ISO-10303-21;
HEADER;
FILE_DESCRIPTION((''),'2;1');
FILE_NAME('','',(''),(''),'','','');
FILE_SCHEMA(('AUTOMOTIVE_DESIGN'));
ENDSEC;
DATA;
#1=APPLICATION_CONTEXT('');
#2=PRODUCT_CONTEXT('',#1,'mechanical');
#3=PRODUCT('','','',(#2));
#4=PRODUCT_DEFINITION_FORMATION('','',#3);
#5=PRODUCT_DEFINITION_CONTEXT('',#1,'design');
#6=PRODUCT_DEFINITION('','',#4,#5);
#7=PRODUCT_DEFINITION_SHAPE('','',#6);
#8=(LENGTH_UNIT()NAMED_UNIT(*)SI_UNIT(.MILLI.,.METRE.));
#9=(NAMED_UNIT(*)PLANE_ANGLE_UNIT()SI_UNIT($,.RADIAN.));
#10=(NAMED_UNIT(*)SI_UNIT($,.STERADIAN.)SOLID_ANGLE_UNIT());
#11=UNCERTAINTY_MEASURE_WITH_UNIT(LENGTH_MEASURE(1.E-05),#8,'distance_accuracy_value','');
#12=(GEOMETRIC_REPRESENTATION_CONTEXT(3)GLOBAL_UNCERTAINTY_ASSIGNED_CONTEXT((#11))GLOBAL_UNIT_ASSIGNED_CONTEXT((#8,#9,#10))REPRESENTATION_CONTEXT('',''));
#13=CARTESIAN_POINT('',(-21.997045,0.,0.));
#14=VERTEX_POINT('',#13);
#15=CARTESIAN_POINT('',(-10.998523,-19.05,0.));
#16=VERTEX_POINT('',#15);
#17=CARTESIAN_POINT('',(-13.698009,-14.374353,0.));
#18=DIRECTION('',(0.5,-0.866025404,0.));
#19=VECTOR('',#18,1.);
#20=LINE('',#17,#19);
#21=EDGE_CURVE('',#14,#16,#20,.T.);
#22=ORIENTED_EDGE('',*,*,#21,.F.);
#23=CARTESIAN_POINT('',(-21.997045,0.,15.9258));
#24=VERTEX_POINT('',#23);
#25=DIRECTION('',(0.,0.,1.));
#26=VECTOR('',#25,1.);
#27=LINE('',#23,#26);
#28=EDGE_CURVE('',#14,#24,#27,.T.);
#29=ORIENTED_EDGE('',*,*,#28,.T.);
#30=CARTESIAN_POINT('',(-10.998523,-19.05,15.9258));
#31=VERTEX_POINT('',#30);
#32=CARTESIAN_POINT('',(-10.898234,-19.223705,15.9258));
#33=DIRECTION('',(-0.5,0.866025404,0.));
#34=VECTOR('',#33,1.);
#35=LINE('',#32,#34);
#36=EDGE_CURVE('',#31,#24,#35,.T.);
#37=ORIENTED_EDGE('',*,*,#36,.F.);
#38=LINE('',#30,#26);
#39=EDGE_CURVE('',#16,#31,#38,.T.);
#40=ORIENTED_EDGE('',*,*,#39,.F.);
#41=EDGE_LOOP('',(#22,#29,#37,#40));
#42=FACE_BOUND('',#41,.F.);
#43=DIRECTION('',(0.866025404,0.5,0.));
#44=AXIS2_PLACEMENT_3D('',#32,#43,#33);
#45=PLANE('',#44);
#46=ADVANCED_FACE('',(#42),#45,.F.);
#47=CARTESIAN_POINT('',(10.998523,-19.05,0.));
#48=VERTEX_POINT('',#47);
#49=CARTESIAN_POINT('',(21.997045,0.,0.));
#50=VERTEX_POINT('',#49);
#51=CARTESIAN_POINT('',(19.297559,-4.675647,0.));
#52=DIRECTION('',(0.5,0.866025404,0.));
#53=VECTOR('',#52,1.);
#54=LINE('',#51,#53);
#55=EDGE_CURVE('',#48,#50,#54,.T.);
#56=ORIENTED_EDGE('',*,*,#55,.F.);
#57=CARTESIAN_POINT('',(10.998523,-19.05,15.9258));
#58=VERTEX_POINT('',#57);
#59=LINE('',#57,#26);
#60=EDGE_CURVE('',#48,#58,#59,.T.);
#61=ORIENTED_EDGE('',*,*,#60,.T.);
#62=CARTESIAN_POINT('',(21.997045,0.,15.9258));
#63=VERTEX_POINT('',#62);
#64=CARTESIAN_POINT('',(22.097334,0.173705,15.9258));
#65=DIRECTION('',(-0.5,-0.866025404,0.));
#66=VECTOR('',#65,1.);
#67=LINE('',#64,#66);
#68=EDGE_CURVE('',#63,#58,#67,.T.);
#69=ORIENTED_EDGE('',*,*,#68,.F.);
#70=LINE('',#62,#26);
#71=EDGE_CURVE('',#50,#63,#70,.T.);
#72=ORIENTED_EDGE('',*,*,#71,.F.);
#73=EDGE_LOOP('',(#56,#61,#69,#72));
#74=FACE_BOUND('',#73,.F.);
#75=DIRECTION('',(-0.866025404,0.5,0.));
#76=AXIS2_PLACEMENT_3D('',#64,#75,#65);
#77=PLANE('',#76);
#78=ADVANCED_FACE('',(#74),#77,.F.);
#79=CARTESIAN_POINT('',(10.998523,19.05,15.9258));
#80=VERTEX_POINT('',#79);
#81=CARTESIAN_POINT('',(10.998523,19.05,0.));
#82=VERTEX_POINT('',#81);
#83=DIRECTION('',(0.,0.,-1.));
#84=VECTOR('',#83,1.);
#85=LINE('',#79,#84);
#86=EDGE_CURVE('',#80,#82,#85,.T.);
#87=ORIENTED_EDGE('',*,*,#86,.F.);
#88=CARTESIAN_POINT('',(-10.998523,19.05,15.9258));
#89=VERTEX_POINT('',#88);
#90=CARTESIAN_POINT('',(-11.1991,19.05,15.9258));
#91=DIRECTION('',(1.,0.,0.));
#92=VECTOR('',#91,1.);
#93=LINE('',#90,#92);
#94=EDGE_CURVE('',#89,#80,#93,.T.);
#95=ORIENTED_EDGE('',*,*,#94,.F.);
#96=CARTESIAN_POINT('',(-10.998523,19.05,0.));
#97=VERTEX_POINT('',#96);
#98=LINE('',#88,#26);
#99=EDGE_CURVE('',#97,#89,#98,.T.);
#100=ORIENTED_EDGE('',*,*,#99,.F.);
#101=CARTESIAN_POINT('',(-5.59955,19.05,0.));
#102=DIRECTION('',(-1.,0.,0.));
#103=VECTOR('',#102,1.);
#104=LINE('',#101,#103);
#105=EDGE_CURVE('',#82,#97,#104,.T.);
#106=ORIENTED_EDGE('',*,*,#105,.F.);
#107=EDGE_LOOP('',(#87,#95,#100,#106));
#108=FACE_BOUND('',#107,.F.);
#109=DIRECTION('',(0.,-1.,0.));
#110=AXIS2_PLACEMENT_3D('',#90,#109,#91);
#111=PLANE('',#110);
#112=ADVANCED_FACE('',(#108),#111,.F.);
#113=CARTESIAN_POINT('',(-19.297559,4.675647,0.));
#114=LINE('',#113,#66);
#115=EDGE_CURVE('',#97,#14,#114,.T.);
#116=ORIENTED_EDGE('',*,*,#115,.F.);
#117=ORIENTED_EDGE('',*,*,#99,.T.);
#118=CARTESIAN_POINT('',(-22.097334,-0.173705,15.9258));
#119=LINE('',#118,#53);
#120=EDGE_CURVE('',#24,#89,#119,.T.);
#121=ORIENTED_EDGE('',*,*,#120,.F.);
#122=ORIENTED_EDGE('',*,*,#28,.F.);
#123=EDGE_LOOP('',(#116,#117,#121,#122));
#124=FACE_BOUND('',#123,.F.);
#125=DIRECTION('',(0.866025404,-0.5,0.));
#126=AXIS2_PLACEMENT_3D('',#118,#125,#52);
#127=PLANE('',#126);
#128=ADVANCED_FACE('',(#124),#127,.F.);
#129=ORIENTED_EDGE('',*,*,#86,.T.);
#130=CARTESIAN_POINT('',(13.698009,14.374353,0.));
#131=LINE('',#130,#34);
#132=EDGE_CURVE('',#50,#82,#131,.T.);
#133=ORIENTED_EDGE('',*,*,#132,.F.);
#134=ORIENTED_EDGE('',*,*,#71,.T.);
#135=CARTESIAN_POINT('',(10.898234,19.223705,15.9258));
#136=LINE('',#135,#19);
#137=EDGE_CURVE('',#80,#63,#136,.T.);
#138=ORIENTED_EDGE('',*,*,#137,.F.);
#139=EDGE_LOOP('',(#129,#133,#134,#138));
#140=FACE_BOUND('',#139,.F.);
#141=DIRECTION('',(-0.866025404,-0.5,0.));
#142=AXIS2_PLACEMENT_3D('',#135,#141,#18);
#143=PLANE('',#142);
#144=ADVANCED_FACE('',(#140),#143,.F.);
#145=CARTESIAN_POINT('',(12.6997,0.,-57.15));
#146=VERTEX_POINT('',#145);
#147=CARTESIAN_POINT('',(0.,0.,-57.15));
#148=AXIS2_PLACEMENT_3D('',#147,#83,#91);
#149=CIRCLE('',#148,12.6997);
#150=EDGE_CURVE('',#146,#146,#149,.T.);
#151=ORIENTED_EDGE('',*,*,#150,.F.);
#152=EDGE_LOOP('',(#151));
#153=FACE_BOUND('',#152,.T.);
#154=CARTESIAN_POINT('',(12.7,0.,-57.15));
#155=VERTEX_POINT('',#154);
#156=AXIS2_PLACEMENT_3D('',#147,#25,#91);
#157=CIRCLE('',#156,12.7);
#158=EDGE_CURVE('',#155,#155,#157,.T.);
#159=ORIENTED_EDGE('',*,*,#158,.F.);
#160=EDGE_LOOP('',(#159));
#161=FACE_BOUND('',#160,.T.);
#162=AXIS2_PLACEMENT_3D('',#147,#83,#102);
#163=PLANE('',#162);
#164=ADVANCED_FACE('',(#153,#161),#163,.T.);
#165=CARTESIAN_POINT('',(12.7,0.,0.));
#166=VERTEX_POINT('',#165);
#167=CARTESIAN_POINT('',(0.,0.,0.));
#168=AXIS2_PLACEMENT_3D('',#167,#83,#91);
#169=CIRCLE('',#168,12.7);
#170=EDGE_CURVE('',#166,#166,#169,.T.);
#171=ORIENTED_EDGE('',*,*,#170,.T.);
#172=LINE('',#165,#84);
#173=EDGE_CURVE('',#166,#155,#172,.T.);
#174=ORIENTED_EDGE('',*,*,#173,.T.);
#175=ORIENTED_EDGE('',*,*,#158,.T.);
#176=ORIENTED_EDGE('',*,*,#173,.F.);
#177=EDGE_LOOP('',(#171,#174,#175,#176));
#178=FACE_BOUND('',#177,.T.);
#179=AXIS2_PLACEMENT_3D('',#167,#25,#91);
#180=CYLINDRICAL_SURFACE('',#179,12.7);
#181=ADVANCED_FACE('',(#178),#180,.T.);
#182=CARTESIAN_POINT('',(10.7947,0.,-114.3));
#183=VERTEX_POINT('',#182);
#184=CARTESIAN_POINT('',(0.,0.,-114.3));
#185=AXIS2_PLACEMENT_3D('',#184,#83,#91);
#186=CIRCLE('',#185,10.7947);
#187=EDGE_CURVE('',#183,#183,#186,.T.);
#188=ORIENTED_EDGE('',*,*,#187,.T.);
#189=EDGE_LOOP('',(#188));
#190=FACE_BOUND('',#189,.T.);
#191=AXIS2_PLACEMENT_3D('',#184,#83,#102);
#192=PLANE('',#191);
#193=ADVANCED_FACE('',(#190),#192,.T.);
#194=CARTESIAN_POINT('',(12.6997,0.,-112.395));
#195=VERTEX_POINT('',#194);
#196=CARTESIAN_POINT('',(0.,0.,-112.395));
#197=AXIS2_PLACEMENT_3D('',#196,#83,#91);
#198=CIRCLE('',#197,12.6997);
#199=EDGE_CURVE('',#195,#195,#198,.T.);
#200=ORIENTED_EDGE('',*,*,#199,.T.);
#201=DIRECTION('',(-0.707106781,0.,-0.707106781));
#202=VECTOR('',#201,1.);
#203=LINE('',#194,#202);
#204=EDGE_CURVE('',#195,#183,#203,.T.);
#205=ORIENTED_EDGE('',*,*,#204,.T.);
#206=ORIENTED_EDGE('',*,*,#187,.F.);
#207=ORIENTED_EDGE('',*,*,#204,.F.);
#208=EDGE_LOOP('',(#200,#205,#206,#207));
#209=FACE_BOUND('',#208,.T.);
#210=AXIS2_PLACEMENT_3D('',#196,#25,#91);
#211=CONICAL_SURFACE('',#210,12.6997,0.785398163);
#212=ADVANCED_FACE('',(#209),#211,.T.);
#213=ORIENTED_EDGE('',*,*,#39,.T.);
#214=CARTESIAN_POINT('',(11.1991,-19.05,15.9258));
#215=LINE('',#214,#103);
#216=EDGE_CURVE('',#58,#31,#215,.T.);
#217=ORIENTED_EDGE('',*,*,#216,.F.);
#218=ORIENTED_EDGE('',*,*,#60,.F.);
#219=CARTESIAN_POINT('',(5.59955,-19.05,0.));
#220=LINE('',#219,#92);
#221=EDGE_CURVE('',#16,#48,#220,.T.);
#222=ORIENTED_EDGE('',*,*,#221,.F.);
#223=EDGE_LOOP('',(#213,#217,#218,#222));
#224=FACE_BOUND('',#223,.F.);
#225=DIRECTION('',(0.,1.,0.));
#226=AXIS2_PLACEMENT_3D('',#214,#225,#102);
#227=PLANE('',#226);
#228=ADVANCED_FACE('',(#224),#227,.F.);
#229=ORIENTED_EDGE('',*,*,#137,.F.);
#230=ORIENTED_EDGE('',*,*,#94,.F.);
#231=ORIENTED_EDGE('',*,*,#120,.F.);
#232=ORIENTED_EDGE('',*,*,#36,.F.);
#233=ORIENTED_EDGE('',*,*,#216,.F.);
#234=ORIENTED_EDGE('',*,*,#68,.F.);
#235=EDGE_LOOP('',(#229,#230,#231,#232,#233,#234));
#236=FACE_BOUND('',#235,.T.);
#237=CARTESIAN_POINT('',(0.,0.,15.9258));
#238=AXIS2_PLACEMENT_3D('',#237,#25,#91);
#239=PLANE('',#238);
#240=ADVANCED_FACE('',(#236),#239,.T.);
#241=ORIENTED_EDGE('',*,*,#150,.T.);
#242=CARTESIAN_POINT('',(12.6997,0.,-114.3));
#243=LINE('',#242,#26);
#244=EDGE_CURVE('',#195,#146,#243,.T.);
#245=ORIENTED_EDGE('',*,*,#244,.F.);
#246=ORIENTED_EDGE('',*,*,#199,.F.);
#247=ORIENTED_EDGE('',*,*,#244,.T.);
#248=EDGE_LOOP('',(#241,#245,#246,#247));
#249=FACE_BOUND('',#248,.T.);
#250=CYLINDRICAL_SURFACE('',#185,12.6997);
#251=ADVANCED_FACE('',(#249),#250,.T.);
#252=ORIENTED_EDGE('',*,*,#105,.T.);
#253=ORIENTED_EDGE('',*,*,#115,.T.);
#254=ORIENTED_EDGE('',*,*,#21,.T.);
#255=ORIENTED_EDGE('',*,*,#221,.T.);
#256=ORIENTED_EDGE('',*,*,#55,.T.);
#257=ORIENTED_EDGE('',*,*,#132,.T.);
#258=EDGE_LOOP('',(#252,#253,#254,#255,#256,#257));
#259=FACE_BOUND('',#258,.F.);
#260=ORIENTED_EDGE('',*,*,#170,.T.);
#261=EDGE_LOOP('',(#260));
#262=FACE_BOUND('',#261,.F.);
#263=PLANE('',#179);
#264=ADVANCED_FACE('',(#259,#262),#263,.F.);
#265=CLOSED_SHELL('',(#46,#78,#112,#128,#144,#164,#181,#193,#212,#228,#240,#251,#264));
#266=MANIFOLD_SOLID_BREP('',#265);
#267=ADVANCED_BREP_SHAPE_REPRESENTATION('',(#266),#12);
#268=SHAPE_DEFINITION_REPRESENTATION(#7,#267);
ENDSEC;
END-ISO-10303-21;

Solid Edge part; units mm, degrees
sketch "Sketch1" plane through (0, 0, 0) normal (0, 0, 1) x (1, 0, 0)
  circle A0 centre (0, 0) radius 22.098
  dimension "D1" = 44.196
extrude "Protrusion1" add sketch "Sketch1" along normal blind 15.9258
sketch "Sketch2" plane through (0, 0, 0) normal (0, 0, -1) x (1, 0, 0)
  circle A0 centre (0, 0) radius 12.7
extrude "Protrusion2" add sketch "Sketch2" along normal blind 114.3
sketch "Sketch3" plane through (0, 0, -114.3) normal (0, 0, -1) x (1, 0, 0)
  circle A0 centre (0, 0) radius 12.6997
extrude "Cutout1" cut sketch "Sketch3" against normal blind 57.15 flip side to cut
chamfer "Chamfer_1" distance 1.905 angle 45 1 edges at (-12.6997, 0, -114.3)
sketch "Sketch4" plane through (0, 0, 15.9258) normal (0, 0, 1) x (1, 0, 0)
  line L0 (-11.1991, 19.05) -> (11.1991, 19.05)
  dimension "D1" = 38.1
extrude "Cutout2" cut sketch "Sketch4" against normal up to next material side at (0, 19.1, 15.9258)
pattern_circular "Pattern1" count 6 over 360 about axis through (0, 0, 15.9258) along (0, 0, 1) of "Cutout2"
properties part number "24102637"
